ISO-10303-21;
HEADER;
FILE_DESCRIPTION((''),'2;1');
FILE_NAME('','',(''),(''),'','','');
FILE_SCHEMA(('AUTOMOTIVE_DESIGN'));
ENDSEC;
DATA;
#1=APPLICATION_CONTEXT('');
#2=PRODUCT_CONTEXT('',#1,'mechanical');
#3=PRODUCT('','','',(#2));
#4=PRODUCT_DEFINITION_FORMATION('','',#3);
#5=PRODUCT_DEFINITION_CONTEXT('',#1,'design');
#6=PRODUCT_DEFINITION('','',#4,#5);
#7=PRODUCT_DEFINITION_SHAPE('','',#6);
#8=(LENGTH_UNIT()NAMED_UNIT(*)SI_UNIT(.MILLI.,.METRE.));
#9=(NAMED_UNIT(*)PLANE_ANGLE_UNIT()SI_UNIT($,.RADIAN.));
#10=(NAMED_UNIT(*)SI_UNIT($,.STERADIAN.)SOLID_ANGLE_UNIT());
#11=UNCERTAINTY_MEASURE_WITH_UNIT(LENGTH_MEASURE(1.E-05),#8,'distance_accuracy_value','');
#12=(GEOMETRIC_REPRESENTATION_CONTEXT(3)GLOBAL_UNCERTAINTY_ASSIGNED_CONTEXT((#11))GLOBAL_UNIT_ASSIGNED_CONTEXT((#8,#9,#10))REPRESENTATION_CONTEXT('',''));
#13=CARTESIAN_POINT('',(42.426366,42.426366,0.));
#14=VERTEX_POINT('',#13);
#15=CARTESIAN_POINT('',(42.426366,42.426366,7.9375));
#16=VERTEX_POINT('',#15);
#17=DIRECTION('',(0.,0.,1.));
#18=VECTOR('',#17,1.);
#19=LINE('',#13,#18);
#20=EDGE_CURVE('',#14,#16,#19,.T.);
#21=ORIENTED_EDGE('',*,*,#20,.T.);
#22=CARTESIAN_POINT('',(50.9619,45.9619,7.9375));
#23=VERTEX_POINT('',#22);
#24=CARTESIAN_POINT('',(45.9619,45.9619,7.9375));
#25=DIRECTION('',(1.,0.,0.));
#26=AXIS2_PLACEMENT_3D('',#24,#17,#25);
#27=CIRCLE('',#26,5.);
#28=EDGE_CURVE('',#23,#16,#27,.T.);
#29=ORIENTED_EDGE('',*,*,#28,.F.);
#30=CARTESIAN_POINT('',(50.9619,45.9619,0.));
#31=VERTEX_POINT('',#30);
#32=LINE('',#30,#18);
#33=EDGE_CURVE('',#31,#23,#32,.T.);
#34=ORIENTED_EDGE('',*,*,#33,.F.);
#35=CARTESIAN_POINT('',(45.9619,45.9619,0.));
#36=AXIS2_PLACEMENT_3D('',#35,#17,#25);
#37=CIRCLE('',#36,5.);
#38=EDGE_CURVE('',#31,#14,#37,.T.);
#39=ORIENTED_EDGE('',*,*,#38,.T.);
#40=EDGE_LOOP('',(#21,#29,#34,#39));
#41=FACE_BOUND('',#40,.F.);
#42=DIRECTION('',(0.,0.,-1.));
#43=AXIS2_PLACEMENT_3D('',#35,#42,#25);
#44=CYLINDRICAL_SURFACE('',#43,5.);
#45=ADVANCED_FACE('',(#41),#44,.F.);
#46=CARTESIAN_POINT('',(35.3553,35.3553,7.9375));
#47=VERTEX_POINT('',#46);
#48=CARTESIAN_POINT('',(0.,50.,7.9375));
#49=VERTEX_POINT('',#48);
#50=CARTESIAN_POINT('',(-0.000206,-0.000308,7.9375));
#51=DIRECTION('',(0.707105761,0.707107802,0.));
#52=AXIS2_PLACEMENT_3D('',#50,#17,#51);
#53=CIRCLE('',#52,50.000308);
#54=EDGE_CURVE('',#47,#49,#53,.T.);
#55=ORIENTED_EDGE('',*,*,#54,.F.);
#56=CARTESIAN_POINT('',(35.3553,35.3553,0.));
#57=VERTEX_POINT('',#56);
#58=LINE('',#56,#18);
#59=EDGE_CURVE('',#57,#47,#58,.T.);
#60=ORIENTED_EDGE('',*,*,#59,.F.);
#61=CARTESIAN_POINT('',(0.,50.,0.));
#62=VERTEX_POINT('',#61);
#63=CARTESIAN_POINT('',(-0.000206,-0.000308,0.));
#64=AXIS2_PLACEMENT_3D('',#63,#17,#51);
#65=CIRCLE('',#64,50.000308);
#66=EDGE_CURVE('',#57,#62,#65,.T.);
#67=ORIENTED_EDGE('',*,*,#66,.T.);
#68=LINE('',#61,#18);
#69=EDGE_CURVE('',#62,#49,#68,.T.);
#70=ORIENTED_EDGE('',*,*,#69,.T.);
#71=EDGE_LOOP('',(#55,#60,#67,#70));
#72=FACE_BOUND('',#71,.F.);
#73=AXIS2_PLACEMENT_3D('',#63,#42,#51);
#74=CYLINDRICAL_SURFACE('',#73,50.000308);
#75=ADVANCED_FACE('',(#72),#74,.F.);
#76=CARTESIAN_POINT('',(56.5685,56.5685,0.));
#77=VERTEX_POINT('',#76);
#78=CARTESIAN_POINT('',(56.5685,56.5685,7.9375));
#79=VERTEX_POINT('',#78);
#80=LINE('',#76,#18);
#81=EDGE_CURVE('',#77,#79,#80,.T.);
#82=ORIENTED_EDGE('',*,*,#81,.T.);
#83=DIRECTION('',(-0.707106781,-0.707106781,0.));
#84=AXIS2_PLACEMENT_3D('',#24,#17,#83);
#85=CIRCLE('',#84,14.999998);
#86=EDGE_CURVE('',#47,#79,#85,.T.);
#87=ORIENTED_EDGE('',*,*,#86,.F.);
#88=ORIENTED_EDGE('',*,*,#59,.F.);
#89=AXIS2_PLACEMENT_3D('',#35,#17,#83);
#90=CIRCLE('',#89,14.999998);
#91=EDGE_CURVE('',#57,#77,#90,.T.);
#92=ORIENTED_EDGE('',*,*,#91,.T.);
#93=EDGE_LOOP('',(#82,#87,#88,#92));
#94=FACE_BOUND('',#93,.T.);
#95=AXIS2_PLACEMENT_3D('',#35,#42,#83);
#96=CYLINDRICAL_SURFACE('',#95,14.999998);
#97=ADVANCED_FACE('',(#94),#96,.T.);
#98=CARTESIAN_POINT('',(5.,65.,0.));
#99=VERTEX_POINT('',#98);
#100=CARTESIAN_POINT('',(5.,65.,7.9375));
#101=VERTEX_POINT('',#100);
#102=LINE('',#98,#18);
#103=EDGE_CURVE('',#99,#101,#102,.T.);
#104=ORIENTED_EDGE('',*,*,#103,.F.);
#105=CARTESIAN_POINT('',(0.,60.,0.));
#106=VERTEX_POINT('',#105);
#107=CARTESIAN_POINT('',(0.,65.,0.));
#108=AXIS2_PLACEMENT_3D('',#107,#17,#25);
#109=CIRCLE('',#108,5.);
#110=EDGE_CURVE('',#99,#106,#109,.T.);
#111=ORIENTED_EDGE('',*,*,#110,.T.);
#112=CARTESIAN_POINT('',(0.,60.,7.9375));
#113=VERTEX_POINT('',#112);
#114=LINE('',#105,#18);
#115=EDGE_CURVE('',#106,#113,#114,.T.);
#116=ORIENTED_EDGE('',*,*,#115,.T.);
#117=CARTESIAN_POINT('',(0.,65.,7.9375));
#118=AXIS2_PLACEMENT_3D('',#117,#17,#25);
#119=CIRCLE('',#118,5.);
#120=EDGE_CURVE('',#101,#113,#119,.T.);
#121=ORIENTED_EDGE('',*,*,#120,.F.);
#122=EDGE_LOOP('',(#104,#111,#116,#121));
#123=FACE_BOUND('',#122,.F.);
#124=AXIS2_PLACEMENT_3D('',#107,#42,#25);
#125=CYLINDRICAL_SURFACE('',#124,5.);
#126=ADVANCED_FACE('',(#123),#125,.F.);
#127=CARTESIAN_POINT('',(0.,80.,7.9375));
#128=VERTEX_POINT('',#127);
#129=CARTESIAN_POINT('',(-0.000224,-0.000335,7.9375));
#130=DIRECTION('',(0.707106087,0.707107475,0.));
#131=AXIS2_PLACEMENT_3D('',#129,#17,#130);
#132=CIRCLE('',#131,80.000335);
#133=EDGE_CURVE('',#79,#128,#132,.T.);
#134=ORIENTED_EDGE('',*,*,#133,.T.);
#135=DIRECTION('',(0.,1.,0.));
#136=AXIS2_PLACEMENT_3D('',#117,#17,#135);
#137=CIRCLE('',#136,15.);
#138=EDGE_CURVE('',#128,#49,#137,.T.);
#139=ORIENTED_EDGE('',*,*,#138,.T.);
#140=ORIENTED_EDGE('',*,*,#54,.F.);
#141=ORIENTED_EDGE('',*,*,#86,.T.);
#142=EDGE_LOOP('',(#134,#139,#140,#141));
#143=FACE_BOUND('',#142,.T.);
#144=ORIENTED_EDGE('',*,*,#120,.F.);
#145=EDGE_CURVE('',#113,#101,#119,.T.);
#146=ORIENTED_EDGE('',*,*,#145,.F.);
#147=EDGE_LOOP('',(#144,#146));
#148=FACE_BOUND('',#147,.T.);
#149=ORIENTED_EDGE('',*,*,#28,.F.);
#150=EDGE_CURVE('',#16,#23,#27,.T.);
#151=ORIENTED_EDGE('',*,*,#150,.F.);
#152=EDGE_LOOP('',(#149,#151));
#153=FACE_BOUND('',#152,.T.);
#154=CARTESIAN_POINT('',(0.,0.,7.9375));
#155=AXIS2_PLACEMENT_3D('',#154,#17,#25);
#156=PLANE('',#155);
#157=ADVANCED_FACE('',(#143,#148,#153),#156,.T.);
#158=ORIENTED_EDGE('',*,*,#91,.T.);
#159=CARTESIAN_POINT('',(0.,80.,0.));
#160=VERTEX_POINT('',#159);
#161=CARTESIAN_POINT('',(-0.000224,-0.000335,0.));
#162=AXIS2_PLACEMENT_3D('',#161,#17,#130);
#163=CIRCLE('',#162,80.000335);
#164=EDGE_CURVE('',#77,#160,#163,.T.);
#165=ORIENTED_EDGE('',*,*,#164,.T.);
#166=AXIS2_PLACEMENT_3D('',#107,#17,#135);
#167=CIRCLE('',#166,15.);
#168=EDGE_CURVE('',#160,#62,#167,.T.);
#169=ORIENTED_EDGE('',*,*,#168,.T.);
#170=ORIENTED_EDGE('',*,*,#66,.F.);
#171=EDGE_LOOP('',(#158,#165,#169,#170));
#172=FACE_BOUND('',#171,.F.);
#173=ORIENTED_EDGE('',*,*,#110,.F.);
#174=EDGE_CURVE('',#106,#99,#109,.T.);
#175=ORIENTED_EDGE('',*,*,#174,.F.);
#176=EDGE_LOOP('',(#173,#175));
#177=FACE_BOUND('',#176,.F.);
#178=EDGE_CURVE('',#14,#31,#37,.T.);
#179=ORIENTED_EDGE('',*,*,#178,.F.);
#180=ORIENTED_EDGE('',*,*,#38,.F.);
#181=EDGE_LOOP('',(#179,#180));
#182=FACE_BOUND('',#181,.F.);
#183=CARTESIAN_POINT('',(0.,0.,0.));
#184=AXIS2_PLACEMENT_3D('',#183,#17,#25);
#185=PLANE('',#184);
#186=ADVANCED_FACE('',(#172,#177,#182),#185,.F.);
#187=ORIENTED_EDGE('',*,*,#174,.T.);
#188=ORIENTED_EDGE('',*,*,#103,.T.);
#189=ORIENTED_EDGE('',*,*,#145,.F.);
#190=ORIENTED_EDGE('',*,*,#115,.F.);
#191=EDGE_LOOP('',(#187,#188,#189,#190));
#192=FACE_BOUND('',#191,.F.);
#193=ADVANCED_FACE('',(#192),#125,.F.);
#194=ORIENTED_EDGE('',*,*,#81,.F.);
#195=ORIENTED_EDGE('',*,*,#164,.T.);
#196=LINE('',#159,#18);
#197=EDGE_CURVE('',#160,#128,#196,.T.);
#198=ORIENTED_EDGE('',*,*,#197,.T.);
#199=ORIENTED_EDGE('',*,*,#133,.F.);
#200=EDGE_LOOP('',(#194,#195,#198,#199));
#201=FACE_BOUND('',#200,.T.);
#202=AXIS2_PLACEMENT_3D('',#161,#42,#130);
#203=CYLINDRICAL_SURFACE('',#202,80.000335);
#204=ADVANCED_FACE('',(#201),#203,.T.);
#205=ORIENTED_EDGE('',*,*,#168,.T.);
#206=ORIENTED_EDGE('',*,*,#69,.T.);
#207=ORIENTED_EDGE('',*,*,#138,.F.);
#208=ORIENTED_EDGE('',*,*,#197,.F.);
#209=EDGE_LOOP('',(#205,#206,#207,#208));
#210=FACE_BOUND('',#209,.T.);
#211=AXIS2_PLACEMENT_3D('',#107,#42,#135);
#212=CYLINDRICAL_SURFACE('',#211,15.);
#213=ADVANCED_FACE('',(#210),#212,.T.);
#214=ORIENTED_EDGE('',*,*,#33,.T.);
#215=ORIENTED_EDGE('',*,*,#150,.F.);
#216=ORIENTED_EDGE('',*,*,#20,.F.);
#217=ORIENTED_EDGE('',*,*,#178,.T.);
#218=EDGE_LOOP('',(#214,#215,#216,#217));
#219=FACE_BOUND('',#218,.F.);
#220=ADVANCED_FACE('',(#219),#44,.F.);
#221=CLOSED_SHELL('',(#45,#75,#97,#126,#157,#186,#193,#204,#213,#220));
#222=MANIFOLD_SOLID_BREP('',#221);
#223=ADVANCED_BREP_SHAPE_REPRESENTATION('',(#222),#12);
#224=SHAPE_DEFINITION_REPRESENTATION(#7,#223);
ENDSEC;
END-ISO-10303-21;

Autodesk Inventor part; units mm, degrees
ref_plane "YZ Plane" through (0, 0, 0) normal (1, 0, 0) x (0, 1, 0)
ref_plane "XZ Plane" through (0, 0, 0) normal (0, 1, 0) x (-1, 0, 0)
ref_plane "XY Plane" through (0, 0, 0) normal (0, 0, 1) x (1, 0, 0)
sketch "Sketch1" plane through (0, 0, 0) normal (0, 0, 1) x (1, 0, 0)
  arc A0 (45.9619, 45.9619) -> (0, 65) centre (0, 0) ccw construction
  arc A1 (56.5685, 56.5685) -> (0, 80) centre (0, 0) ccw
  arc A2 (35.3553, 35.3553) -> (0, 50) centre (0, 0) ccw
  arc A3 (35.3553, 35.3553) -> (56.5685, 56.5685) centre (45.9619, 45.9619) ccw
  arc A4 (0, 80) -> (0, 50) centre (0, 65) ccw
  line L0 (0, 65) -> (0, 0)
  line L1 (0, 0) -> (45.9619, 45.9619)
  circle A5 centre (0, 65) radius 5
  circle A6 centre (45.9619, 45.9619) radius 5
  dimension "d0" = 45
  dimension "d1" = 50
  dimension "d2" = 80
  dimension "d3" = 10
  dimension "d4" = 10
extrude "Extrusion1" add sketch "Sketch1" along normal blind 7.9375 contours A3 A2 A4 A1
properties part number "Support" material "Steel, Mild"
